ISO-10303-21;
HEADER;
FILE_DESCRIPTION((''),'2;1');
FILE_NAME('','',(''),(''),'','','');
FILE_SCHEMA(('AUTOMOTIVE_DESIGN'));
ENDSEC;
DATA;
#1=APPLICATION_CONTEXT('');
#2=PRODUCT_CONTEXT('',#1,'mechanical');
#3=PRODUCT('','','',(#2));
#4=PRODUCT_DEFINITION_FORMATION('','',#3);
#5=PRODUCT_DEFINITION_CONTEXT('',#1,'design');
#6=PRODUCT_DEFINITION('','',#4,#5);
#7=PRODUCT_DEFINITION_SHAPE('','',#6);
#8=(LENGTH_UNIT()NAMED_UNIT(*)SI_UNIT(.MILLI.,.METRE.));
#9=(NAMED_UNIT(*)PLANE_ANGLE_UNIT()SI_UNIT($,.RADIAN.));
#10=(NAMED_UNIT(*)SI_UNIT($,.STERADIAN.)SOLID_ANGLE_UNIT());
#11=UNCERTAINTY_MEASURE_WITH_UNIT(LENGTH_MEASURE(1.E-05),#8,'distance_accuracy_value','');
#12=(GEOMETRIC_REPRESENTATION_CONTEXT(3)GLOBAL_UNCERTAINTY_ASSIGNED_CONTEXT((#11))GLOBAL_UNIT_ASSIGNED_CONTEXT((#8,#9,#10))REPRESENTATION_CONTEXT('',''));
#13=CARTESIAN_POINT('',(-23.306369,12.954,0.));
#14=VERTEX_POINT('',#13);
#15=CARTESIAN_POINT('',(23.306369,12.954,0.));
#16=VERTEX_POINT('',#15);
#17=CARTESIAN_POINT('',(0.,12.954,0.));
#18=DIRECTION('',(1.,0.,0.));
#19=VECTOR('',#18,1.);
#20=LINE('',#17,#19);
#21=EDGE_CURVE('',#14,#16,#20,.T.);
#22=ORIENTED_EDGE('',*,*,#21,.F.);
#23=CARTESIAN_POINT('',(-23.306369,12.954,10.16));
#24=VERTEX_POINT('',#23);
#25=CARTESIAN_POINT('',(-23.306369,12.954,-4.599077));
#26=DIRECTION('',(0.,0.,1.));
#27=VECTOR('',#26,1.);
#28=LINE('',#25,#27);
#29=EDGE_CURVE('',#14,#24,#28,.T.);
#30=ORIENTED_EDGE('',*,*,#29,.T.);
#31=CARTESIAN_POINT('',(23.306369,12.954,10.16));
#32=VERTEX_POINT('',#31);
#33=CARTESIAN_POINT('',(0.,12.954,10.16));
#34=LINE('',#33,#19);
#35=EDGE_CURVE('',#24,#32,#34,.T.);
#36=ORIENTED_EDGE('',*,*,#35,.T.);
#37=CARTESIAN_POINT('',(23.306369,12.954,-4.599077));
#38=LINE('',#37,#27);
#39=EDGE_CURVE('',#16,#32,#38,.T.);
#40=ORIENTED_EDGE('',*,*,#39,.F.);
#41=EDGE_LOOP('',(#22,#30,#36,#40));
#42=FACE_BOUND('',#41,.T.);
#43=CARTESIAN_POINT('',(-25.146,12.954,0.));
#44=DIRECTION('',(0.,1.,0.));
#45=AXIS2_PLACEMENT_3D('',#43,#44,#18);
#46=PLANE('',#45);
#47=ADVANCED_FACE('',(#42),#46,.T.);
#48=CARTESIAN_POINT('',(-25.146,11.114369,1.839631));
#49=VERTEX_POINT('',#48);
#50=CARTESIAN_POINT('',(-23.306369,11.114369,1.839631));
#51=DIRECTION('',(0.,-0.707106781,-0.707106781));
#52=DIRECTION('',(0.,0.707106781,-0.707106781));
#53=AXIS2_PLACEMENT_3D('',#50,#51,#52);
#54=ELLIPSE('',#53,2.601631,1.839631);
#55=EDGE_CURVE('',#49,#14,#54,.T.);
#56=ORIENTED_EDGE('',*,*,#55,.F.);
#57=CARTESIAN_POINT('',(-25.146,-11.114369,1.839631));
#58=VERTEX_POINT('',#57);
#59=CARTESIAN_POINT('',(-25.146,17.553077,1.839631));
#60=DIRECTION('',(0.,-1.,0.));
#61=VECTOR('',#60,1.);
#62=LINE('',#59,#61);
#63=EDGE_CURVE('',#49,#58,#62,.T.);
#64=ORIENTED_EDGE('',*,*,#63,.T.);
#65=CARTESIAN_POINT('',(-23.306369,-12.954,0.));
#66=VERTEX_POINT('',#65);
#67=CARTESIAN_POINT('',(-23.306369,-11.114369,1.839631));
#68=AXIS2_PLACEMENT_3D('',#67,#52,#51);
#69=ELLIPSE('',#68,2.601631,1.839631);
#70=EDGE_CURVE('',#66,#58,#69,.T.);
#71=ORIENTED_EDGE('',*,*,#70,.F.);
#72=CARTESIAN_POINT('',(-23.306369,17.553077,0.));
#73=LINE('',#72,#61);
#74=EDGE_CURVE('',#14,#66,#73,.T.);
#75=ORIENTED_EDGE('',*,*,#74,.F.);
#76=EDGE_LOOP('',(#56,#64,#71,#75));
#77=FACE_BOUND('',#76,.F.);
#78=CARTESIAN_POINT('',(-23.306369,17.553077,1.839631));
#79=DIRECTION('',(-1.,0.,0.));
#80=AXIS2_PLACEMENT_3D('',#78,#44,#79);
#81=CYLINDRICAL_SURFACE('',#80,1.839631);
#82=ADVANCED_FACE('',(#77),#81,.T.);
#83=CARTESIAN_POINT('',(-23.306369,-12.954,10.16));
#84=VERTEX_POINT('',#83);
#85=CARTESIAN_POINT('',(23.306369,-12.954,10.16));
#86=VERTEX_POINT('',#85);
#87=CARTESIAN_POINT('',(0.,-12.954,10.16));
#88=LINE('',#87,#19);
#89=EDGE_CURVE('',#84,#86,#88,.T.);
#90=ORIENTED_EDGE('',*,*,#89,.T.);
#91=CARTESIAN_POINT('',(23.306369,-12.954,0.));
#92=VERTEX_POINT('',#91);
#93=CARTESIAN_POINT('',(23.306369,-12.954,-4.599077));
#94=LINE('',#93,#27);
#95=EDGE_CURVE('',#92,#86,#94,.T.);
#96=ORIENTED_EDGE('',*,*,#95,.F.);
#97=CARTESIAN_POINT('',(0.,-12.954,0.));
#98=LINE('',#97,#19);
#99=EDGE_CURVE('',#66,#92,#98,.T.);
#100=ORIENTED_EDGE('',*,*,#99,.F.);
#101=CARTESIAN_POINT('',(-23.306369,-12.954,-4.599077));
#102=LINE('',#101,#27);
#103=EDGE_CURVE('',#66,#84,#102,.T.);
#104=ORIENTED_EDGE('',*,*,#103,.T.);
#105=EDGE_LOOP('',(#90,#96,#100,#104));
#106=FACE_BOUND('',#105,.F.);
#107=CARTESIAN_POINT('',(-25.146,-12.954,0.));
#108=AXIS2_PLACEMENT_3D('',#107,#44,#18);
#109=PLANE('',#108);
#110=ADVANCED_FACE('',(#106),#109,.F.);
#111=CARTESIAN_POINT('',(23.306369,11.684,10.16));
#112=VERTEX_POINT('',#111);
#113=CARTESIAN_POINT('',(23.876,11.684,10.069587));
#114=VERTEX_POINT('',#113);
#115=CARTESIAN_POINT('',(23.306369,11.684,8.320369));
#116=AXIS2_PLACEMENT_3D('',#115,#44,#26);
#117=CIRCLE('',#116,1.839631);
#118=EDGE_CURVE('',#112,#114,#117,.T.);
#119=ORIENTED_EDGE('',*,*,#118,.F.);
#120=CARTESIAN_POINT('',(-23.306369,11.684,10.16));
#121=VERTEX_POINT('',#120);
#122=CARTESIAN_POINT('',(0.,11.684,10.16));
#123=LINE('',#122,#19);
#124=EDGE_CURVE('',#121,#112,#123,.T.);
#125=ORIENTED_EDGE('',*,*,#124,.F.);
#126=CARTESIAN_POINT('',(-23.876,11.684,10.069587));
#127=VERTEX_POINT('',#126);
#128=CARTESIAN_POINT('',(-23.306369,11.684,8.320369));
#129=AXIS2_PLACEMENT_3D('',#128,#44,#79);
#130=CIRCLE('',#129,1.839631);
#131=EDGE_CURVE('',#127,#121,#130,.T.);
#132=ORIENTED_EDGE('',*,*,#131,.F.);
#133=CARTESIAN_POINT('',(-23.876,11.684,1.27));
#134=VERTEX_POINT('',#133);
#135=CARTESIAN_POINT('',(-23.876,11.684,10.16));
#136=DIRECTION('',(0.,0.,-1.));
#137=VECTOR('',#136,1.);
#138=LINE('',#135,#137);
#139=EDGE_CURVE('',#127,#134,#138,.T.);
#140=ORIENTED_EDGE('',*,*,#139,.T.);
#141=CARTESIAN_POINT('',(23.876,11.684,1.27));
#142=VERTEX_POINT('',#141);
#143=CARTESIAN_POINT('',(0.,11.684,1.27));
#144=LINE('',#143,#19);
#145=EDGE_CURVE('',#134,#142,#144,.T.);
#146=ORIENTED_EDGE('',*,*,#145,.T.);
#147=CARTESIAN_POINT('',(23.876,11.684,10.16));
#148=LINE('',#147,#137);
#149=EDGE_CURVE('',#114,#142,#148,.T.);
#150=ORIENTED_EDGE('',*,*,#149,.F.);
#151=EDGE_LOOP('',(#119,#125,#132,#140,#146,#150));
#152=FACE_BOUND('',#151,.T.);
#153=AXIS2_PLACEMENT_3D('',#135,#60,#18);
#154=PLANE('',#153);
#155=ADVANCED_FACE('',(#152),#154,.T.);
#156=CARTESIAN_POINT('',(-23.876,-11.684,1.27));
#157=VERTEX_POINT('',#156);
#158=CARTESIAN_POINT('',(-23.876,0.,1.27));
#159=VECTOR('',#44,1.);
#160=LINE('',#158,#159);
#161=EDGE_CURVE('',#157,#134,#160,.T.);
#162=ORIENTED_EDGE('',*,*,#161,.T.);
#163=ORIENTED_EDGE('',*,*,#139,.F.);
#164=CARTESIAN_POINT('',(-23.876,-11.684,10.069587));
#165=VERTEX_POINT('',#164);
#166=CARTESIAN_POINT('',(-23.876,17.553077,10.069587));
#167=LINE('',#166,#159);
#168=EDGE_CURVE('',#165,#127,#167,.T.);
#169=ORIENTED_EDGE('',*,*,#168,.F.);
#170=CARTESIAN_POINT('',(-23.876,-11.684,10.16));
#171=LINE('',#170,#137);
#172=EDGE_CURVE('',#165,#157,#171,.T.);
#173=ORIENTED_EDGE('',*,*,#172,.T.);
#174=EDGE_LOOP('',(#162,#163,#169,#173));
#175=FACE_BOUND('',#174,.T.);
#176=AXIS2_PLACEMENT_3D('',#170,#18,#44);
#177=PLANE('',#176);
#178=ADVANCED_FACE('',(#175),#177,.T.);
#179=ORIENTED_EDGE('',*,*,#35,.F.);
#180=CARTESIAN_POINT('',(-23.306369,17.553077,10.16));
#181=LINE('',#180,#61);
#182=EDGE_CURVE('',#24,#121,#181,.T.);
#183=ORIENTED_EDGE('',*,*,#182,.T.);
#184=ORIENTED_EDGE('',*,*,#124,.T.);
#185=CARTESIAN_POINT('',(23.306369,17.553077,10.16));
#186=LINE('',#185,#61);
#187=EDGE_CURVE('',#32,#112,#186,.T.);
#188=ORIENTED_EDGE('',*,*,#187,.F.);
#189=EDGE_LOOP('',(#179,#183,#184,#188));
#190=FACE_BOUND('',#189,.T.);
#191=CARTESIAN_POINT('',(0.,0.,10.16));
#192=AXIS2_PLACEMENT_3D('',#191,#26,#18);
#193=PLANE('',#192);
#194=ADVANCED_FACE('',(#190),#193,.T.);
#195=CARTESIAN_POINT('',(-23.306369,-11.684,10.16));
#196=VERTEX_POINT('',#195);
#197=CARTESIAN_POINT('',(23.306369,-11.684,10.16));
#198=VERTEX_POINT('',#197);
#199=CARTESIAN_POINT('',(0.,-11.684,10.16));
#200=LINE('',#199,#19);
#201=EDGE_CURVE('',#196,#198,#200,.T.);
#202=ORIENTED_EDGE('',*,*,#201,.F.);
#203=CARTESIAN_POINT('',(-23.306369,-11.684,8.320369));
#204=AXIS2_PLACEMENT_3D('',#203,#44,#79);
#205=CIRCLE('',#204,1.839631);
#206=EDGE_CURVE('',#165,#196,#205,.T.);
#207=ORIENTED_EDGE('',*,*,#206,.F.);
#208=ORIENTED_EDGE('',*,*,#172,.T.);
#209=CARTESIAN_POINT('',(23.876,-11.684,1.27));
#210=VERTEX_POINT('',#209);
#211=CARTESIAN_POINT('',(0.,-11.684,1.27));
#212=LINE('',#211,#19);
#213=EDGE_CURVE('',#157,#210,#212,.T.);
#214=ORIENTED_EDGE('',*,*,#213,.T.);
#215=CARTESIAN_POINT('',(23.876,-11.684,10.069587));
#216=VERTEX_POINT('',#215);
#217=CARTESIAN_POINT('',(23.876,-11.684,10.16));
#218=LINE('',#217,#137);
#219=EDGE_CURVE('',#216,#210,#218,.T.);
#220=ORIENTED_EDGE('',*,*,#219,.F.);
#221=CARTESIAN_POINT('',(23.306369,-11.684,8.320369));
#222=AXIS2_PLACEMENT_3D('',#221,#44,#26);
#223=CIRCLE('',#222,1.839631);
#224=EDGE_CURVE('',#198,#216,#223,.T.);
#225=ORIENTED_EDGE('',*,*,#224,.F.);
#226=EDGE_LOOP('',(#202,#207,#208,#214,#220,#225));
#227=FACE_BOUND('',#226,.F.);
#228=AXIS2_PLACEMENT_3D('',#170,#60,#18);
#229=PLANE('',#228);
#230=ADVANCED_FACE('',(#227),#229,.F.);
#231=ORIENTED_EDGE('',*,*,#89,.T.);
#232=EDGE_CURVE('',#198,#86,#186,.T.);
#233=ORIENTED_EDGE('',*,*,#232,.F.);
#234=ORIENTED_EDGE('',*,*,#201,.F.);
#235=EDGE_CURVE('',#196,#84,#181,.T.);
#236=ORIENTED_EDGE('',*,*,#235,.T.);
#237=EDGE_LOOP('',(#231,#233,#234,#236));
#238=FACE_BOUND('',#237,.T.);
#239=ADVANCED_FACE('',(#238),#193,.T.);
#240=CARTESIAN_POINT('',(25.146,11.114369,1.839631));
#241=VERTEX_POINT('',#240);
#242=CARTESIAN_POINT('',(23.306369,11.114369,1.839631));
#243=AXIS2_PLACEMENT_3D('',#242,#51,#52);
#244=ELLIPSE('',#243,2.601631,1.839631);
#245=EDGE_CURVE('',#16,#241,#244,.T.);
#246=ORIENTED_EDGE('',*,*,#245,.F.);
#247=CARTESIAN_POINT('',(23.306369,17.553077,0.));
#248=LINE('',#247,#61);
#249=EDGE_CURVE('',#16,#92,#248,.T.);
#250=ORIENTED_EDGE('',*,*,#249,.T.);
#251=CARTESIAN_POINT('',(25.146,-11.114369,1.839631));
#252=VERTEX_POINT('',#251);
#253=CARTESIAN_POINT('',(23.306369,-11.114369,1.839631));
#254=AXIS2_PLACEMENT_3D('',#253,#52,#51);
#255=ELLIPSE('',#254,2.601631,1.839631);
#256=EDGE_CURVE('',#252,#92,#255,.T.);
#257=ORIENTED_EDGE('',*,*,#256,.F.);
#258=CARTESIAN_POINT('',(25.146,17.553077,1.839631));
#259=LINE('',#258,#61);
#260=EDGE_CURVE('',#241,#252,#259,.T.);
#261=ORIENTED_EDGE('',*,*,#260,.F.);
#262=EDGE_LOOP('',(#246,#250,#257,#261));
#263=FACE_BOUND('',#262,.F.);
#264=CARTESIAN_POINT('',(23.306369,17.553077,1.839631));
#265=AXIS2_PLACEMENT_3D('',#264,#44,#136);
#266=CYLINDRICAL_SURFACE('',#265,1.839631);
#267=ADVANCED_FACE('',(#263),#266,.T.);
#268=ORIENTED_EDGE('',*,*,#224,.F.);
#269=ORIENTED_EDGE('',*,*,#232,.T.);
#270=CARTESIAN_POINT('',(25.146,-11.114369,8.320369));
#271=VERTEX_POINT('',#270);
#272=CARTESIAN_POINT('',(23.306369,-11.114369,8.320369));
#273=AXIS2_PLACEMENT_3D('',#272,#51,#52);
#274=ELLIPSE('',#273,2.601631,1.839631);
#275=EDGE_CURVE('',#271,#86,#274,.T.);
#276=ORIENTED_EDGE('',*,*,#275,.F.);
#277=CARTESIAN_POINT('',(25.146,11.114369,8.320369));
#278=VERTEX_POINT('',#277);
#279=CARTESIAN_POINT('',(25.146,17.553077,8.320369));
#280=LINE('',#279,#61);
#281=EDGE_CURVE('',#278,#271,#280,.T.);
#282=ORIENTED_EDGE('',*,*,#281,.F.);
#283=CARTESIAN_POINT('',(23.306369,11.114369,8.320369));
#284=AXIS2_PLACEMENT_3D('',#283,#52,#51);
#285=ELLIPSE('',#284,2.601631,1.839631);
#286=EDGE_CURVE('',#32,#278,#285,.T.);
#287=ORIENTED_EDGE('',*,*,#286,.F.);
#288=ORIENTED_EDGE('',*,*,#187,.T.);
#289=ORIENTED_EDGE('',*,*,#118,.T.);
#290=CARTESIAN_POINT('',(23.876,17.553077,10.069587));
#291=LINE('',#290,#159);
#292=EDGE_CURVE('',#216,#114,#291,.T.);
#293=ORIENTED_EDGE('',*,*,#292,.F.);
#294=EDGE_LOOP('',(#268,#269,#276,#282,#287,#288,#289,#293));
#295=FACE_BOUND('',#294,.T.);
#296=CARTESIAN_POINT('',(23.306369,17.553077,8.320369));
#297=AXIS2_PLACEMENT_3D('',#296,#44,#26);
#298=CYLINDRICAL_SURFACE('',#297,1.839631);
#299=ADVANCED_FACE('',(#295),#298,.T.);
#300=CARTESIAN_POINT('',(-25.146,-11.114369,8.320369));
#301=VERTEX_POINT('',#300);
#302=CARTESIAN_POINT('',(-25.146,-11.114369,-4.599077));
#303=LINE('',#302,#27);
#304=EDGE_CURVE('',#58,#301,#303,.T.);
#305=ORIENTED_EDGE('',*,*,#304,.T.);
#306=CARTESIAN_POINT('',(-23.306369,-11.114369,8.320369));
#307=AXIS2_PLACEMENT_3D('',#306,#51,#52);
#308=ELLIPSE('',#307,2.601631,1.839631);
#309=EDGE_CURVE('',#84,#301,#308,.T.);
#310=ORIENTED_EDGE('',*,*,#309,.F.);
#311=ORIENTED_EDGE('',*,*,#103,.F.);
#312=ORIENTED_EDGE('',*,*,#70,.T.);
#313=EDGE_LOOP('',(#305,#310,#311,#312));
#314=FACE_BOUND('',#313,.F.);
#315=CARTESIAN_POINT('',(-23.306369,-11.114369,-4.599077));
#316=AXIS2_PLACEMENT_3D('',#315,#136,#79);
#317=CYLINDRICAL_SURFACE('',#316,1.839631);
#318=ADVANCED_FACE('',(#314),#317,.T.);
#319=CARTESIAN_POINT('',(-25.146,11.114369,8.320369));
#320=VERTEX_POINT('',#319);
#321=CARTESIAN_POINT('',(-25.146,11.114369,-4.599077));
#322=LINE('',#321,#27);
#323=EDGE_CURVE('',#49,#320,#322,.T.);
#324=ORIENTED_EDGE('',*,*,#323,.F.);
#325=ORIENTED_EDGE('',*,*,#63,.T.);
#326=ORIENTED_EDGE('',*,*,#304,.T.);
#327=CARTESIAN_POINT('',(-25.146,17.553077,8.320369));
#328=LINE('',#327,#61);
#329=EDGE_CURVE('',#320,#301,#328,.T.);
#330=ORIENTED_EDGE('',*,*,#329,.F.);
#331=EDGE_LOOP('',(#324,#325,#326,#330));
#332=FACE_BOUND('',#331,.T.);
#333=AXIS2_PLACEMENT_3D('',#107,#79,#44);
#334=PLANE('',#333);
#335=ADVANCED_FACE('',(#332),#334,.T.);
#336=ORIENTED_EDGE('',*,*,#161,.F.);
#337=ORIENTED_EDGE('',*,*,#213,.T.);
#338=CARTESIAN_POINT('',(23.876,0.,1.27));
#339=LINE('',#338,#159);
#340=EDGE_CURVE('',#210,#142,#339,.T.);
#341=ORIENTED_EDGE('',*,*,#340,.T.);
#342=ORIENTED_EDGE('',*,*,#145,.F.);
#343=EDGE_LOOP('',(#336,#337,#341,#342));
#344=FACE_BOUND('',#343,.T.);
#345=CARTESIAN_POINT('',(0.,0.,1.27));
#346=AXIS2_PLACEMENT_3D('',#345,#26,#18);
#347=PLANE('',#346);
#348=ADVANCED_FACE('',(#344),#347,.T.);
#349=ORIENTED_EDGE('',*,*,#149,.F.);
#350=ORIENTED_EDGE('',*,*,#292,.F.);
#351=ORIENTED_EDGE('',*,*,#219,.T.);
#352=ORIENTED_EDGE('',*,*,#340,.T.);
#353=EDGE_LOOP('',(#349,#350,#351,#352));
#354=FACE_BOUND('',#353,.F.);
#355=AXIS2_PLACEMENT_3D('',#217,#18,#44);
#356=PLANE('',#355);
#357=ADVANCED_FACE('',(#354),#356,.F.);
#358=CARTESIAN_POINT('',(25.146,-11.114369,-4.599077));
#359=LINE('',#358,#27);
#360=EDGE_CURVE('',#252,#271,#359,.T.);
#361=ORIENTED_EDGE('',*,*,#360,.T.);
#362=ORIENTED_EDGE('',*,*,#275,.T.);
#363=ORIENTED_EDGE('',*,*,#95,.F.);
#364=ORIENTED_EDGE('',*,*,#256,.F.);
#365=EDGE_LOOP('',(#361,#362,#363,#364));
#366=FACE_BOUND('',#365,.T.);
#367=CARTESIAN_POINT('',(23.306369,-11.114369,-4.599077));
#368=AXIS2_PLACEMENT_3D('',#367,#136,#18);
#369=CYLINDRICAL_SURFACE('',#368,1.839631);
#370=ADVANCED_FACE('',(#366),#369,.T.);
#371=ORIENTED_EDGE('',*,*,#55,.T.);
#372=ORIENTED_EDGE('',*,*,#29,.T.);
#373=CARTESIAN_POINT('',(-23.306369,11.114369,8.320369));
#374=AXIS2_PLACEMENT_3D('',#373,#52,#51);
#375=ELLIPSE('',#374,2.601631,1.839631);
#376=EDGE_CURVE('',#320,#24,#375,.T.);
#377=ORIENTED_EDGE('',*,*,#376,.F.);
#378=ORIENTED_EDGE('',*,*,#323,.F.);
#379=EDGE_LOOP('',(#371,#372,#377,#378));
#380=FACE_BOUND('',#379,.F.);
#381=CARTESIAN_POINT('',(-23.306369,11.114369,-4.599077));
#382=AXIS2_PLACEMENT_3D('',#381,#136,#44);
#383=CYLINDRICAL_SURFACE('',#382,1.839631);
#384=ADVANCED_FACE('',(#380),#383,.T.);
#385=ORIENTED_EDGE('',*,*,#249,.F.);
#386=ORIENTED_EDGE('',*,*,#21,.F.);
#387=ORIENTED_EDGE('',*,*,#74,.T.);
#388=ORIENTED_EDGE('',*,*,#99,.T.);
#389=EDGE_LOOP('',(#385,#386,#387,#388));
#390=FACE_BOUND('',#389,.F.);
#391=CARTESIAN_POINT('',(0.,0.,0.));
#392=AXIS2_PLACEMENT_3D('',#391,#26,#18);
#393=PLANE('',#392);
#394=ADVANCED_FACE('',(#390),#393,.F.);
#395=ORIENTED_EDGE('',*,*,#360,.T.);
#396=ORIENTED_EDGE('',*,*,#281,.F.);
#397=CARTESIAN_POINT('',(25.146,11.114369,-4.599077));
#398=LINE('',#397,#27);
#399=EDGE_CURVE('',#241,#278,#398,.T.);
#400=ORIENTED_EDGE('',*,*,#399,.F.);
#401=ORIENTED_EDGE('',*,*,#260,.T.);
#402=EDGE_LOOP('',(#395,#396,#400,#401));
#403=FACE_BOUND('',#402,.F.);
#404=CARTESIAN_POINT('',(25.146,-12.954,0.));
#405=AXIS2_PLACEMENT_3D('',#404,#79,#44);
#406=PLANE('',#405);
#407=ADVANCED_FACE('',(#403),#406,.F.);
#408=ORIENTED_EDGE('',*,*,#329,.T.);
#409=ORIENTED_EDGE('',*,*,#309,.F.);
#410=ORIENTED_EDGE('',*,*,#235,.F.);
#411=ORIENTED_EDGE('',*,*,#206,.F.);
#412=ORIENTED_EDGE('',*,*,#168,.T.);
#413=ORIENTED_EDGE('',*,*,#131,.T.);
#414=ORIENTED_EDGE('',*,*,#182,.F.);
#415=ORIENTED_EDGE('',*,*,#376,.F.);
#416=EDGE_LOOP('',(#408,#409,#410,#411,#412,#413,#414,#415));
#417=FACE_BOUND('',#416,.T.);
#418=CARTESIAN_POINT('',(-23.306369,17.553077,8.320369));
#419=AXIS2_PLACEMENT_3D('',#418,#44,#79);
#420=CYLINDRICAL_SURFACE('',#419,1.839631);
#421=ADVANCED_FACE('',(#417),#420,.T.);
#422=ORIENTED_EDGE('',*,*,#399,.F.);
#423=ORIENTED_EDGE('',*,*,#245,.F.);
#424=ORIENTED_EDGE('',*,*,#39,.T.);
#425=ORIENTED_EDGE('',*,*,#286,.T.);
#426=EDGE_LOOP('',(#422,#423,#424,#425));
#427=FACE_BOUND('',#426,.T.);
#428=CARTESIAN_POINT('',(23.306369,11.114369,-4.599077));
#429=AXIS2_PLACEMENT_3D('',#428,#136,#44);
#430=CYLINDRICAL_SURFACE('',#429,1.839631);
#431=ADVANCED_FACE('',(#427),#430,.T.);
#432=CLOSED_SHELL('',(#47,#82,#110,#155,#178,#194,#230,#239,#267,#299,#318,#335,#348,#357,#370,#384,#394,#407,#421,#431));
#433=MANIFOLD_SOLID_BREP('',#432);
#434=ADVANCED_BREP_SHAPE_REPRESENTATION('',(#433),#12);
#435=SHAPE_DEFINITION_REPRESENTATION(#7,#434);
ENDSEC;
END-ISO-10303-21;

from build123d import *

# Parameters (mm, degrees)
F0_W        = 50.292
F0_H        = 25.908
F1_DEPTH    = 10.16
F2_W        = 47.752
F2_H        = 23.368
F3_DEPTH    = 8.89
F4_T1_DEPTH = 19.3581536726
F4_T3_DEPTH = 35.1061536726
F5_T1_DEPTH = 19.3581536726
F5_T3_DEPTH = 35.1061536726


# Not quite as in the source:
# - a fillet or chamfer that OpenCascade refuses, or shapes differently, is made with other operations: its cross-section is extruded or revolved along the edge and cut away or added
# - a feature names something its author has since deleted; it is built from what else it names


with BuildPart() as f1:
    # F0 (on Top) → F1 (new body)
    with BuildSketch(Plane.XY):
        Rectangle(F0_W, F0_H)
    extrude(amount=F1_DEPTH)

    # F2 (on face) → F3 (cut)
    with BuildSketch(Plane.XY.offset(10.16)):
        Rectangle(F2_W, F2_H)
    extrude(amount=-F3_DEPTH, mode=Mode.SUBTRACT)

    # F4: fillet of radius 1.8396307345 on 4 edges, made by hand

    # F4_s2 → F4_t1 (cut)
    with BuildSketch(Plane.XY.offset(-4.5990768363)):
        with BuildLine():
            ThreePointArc((-23.3063692655, 12.954), (-24.6071846327, 12.4151846327), (-25.146, 11.1143692655))
            Line((-25.146, 11.1143692655), (-25.146, 12.954))
            Line((-25.146, 12.954), (-23.3063692655, 12.954))
        make_face()
        with BuildLine():
            ThreePointArc((-25.146, -11.1143692655), (-24.6071846327, -12.4151846327), (-23.3063692655, -12.954))
            Line((-23.3063692655, -12.954), (-25.146, -12.954))
            Line((-25.146, -12.954), (-25.146, -11.1143692655))
        make_face()
    extrude(amount=F4_T1_DEPTH, mode=Mode.SUBTRACT)

    # F4_s4 → F4_t3 (cut)
    with BuildSketch(Plane.XZ.offset(-17.5530768363)):
        with BuildLine():
            ThreePointArc((-25.146, 1.8396307345), (-24.6071846327, 0.5388153673), (-23.3063692655, 0))
            Line((-23.3063692655, 0), (-25.146, 0))
            Line((-25.146, 0), (-25.146, 1.8396307345))
        make_face()
        with BuildLine():
            ThreePointArc((-25.146, 8.3203692655), (-24.6071846327, 9.6211846327), (-23.3063692655, 10.16))
            Line((-23.3063692655, 10.16), (-25.146, 10.16))
            Line((-25.146, 10.16), (-25.146, 8.3203692655))
        make_face()
    extrude(amount=F4_T3_DEPTH, mode=Mode.SUBTRACT)

    # F5: fillet of radius 1.8396307345 on 4 edges, made by hand

    # F5_s2 → F5_t1 (cut)
    with BuildSketch(Plane.XY.offset(-4.5990768363)):
        with BuildLine():
            ThreePointArc((25.146, -11.1143692655), (24.6071846327, -12.4151846327), (23.3063692655, -12.954))
            Line((23.3063692655, -12.954), (25.146, -12.954))
            Line((25.146, -12.954), (25.146, -11.1143692655))
        make_face()
        with BuildLine():
            ThreePointArc((23.3063692655, 12.954), (24.6071846327, 12.4151846327), (25.146, 11.1143692655))
            Line((25.146, 11.1143692655), (25.146, 12.954))
            Line((25.146, 12.954), (23.3063692655, 12.954))
        make_face()
    extrude(amount=F5_T1_DEPTH, mode=Mode.SUBTRACT)

    # F5_s4 → F5_t3 (cut)
    with BuildSketch(Plane.XZ.offset(-17.5530768363)):
        with BuildLine():
            ThreePointArc((23.3063692655, 0), (24.6071846327, 0.5388153673), (25.146, 1.8396307345))
            Line((25.146, 1.8396307345), (25.146, 0))
            Line((25.146, 0), (23.3063692655, 0))
        make_face()
        with BuildLine():
            ThreePointArc((23.3063692655, 10.16), (24.6071846327, 9.6211846327), (25.146, 8.3203692655))
            Line((25.146, 8.3203692655), (25.146, 10.16))
            Line((25.146, 10.16), (23.3063692655, 10.16))
        make_face()
    extrude(amount=F5_T3_DEPTH, mode=Mode.SUBTRACT)


solid = f1.part
